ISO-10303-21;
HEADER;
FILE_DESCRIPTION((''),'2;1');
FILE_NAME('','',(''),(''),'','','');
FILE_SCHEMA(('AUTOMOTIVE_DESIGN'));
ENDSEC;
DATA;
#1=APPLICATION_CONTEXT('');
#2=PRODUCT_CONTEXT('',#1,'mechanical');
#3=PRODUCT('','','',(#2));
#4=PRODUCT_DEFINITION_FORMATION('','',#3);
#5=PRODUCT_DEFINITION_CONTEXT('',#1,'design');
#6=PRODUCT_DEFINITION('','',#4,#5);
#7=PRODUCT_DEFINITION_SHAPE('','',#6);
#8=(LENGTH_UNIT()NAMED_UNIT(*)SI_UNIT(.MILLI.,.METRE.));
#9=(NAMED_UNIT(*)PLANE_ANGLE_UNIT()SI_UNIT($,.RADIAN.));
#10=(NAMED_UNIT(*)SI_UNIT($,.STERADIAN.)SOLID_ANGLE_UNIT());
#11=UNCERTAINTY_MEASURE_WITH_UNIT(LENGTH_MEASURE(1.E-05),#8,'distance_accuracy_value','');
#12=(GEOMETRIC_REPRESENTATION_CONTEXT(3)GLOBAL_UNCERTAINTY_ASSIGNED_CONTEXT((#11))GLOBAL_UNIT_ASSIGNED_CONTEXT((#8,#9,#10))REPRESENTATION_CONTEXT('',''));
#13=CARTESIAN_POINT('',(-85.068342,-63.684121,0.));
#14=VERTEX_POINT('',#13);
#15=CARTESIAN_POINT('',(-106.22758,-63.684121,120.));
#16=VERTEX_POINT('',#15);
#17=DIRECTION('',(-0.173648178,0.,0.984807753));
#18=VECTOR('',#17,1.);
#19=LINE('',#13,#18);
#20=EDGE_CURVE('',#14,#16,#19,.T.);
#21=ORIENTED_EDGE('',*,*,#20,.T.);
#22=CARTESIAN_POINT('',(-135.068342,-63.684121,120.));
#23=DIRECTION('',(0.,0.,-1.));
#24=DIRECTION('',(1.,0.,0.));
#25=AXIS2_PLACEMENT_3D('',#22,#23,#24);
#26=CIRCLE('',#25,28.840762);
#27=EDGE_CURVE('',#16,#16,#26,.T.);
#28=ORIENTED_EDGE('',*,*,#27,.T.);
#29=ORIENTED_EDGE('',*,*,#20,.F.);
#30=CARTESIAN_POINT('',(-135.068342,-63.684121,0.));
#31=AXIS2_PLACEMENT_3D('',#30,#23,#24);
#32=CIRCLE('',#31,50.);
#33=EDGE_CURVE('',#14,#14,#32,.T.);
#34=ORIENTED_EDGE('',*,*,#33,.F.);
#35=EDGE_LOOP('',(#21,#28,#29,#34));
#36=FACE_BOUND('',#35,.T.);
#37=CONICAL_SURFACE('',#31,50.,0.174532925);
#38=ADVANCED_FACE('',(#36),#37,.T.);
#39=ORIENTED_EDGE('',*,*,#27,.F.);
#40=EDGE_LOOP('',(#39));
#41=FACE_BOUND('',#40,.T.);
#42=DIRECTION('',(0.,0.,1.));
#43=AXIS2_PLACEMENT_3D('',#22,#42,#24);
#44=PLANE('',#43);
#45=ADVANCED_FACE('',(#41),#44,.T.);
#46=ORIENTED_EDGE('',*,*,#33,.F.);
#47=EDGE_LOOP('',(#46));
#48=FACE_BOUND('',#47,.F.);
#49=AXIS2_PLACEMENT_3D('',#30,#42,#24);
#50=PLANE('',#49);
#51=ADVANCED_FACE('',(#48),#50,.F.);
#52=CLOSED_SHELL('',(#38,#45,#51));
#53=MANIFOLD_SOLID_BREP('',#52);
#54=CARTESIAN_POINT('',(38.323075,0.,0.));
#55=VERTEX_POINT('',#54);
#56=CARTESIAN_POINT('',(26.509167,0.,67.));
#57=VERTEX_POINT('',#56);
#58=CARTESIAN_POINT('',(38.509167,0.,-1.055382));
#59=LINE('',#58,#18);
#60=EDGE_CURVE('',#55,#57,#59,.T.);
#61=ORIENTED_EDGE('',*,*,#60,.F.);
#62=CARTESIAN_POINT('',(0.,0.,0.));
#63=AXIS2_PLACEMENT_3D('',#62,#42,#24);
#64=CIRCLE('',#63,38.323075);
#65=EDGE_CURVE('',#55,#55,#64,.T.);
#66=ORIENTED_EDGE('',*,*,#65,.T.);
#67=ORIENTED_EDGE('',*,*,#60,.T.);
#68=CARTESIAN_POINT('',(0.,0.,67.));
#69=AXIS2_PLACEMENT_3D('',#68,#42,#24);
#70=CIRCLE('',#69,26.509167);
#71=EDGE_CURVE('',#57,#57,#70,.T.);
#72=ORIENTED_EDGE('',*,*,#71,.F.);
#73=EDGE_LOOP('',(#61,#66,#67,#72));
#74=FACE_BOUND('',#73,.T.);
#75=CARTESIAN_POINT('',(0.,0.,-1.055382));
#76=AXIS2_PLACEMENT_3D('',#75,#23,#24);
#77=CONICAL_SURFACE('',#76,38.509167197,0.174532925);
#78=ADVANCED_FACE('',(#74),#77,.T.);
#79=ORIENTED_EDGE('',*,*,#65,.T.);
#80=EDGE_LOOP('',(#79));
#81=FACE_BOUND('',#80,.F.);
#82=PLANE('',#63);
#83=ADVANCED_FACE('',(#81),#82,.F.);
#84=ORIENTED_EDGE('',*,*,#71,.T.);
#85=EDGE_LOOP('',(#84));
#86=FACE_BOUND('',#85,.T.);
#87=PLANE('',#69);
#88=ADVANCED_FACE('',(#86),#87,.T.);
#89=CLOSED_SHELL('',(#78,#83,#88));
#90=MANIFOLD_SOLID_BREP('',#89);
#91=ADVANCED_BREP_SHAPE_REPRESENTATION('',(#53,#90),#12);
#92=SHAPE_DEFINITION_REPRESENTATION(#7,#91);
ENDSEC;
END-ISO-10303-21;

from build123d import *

# Parameters (mm, degrees)
F0_R     = 38.5091671968
F1_DEPTH = 67
F3_R     = 50
F4_DEPTH = 120
F4_TAPER = 10


# Not quite as in the source:
# - a fillet or chamfer that OpenCascade refuses, or shapes differently, is made with other operations: its cross-section is extruded or revolved along the edge and cut away or added


with BuildPart() as f1:
    # F0 (on Top) → F1 (new body)
    with BuildSketch(Plane.XY):
        Circle(F0_R)
    extrude(amount=F1_DEPTH)

    # F2: chamfer of 12 x 68.0553818354 on 1 edges, made by hand

    # F2_s1 → F2_t2 (revolve, cut)
    with BuildSketch(Plane.XZ):
        Polygon((38.5091671968, -1.0553818354), (26.5091671968, 67), (38.5091671968, 67), align=None)
    revolve(axis=Axis((0, 0, 67), (0, 0, 1)), mode=Mode.SUBTRACT)


with BuildPart() as f4:
    # F3 (on Top) → F4 (new body)
    with BuildSketch(Plane.XY):
        with Locations((-135.0683420897, -63.6841207743)):
            Circle(F3_R)
    extrude(amount=F4_DEPTH, taper=F4_TAPER)


solid = Compound([f1.part, f4.part])
